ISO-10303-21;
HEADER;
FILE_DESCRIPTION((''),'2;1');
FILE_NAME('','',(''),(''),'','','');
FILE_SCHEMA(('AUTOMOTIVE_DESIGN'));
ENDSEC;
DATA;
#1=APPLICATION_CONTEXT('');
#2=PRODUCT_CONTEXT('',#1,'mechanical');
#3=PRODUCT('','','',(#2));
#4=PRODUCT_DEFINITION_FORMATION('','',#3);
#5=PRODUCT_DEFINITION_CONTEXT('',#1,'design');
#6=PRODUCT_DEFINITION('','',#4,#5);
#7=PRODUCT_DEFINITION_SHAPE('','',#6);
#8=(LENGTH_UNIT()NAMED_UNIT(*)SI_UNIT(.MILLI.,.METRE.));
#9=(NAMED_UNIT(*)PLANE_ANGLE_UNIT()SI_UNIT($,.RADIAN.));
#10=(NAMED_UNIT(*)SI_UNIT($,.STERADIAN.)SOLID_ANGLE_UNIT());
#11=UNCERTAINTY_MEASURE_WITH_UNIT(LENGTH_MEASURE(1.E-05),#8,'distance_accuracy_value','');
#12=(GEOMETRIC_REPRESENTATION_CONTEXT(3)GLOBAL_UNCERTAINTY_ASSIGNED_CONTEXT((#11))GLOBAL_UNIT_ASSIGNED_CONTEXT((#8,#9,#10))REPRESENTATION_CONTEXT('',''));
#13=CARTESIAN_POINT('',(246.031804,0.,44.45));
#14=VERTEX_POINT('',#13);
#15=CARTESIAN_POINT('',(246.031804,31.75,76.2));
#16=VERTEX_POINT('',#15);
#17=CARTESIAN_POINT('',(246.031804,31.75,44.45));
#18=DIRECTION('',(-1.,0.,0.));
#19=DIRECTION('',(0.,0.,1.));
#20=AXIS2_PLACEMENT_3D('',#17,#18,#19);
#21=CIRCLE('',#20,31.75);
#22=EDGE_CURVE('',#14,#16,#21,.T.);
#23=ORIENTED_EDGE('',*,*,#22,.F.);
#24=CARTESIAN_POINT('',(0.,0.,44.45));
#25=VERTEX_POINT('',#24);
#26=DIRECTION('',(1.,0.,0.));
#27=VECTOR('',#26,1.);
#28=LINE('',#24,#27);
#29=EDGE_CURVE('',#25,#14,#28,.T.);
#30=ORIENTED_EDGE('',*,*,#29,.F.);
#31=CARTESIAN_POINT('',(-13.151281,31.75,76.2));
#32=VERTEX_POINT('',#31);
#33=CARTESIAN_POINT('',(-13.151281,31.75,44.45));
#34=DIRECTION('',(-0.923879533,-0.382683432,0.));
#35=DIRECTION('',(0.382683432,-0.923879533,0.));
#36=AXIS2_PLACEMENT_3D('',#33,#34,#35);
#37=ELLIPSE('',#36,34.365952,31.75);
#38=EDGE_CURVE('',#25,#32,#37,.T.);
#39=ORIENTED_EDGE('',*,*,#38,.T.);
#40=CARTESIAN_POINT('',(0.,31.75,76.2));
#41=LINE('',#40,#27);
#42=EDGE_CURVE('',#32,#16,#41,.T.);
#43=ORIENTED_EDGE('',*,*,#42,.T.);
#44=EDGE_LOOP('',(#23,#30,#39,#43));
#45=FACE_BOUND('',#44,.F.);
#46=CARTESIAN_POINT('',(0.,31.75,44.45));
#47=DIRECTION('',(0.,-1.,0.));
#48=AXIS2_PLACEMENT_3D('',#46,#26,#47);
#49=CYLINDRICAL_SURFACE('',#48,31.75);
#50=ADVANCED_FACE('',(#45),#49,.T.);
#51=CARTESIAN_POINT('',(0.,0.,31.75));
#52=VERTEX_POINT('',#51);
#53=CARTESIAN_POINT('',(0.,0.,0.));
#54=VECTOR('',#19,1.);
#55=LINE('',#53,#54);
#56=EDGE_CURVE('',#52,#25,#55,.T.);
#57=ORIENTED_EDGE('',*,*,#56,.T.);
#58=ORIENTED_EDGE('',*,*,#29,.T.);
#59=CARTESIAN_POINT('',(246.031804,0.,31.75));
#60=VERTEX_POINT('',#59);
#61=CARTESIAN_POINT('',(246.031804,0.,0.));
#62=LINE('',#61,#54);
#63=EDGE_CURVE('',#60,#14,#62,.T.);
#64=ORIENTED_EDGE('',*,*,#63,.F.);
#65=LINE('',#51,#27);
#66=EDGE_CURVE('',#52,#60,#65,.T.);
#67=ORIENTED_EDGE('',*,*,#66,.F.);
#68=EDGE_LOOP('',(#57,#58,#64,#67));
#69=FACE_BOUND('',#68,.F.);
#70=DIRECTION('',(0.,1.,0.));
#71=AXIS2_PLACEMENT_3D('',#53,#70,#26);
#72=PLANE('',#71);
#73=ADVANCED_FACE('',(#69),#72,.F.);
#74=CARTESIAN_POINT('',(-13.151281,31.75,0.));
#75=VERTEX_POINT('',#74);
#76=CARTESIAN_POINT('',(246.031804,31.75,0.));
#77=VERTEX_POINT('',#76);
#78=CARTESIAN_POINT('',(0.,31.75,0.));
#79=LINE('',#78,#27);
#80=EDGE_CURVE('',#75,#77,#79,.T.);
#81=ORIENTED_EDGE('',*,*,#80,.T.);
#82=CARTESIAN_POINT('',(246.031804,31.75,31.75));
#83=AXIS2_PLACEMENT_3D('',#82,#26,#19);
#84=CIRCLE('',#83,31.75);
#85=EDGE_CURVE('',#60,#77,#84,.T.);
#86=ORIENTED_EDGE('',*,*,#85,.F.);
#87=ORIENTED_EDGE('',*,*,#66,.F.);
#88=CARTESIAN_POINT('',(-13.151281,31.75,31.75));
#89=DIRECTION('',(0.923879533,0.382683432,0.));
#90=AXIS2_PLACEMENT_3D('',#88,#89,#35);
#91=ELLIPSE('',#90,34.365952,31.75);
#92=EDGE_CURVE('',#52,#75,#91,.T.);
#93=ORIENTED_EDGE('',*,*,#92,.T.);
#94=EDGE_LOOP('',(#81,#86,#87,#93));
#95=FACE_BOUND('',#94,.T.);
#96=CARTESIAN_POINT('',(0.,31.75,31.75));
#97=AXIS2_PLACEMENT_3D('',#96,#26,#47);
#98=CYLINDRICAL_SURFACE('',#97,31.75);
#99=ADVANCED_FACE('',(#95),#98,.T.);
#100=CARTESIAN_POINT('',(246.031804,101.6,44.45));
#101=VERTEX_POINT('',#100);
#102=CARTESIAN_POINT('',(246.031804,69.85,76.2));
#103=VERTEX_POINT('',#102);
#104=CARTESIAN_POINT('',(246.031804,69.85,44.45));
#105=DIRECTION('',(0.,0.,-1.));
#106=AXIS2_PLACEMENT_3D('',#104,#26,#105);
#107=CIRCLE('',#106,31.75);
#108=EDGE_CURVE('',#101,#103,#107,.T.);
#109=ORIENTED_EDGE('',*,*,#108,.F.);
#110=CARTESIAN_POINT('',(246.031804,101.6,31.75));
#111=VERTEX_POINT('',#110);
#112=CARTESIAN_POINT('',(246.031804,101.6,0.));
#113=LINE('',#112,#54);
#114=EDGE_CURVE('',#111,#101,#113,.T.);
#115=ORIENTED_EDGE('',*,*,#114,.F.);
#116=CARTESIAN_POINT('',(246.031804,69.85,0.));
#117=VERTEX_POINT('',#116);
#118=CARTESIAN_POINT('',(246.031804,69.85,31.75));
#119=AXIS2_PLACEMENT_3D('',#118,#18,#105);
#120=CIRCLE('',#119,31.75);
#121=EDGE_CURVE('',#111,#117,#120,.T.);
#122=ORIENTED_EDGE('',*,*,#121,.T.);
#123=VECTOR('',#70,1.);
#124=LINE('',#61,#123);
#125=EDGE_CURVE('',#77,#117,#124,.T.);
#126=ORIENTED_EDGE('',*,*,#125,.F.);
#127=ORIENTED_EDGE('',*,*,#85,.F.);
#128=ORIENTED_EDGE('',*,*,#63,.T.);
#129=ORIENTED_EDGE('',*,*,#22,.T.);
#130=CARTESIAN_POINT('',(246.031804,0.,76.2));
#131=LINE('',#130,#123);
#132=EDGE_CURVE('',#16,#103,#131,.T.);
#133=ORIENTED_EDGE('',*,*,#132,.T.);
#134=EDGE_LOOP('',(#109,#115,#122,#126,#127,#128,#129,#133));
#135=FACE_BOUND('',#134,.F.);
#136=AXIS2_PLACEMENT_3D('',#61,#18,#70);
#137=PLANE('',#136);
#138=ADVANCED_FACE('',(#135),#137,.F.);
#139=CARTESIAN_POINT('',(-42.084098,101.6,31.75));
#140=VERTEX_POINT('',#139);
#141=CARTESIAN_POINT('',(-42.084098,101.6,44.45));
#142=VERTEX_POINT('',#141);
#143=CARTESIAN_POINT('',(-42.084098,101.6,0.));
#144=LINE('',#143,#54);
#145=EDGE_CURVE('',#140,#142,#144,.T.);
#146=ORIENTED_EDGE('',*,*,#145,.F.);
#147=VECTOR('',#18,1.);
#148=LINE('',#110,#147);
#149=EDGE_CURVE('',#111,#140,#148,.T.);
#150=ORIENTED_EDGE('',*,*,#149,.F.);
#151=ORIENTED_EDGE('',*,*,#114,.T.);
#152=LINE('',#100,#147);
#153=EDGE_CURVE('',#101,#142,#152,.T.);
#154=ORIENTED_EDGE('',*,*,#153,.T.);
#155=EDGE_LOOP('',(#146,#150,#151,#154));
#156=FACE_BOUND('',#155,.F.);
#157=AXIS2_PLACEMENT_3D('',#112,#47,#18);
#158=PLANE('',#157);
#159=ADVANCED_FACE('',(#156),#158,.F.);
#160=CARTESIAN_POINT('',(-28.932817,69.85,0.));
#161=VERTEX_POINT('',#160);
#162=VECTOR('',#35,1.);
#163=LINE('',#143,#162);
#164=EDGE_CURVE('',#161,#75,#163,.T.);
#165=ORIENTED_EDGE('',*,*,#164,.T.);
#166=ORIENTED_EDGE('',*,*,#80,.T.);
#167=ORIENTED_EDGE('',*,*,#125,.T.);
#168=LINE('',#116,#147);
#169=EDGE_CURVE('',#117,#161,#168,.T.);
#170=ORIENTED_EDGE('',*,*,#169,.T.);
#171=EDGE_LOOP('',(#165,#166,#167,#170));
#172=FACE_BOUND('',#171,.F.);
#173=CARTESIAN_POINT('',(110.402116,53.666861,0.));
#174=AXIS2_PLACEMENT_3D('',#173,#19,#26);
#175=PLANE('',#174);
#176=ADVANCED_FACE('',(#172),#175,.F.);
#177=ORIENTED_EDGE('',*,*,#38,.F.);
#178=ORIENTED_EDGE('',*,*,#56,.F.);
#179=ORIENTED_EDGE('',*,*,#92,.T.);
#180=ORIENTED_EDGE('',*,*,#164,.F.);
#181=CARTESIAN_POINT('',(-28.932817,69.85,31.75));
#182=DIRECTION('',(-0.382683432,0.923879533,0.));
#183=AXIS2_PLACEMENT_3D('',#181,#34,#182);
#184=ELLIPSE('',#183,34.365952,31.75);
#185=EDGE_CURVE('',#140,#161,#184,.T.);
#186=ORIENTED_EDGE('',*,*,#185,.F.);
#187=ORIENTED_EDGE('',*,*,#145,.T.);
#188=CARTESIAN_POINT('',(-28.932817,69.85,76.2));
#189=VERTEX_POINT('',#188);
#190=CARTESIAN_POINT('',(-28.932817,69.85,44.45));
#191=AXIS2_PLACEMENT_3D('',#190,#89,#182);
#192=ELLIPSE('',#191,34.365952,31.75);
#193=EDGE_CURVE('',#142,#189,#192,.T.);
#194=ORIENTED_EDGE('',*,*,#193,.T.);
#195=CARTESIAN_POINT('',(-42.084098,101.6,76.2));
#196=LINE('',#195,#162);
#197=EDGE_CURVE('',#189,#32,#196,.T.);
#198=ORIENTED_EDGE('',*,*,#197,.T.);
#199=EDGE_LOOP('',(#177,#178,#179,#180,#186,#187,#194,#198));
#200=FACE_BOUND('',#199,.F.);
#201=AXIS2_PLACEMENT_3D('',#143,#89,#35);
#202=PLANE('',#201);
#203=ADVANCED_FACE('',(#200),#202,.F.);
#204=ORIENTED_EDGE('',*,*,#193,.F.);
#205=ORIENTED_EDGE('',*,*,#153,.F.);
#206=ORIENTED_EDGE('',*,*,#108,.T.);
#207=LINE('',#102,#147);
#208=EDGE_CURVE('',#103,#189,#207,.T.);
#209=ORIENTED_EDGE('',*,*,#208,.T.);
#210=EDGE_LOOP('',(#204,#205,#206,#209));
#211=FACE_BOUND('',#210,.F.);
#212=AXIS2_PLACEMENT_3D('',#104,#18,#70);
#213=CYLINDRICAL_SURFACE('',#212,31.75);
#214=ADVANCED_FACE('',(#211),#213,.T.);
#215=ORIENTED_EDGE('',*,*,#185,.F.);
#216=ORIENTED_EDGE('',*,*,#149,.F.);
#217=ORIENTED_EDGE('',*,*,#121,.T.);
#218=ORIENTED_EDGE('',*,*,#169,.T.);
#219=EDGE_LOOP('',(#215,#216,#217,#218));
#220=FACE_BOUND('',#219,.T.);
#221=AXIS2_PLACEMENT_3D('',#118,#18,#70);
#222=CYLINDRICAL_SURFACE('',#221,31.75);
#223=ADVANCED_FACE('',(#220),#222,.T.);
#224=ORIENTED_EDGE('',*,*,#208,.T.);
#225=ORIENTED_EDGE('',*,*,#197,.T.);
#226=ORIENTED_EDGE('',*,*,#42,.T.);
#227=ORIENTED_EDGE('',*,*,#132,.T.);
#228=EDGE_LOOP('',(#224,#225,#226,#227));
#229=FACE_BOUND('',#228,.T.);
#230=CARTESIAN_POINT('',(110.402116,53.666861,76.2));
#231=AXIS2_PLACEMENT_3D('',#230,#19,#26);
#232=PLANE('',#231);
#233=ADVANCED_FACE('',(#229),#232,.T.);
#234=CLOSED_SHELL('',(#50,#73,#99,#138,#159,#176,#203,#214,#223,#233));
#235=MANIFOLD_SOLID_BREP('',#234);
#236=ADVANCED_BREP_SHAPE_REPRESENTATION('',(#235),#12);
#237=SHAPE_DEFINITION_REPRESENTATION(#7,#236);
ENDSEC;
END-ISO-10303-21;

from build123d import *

# Parameters (mm, degrees)
F1_DEPTH = 76.2
F2_R     = 31.75


# Not quite as in the source:
# - a feature names something its author has since deleted; it is built from what else it names


with BuildPart() as f1:
    # F0 (on Top) → F1 (new body)
    with BuildSketch(Plane.XY):
        Polygon((-42.0840979371, 101.6), (0, 0), (246.0318041258, 0), (246.0318041258, 101.6), align=None)
    extrude(amount=F1_DEPTH)

    # F2
    f2_edges = [f1.edges().sort_by_distance(p)[0] for p in [
        (123.015902, 0, 76.2),
        (123.015902, 0, 0),
        (101.973853, 101.6, 76.2),
        (101.973853, 101.6, 0),
    ]]
    fillet(f2_edges, radius=F2_R)


solid = f1.part
